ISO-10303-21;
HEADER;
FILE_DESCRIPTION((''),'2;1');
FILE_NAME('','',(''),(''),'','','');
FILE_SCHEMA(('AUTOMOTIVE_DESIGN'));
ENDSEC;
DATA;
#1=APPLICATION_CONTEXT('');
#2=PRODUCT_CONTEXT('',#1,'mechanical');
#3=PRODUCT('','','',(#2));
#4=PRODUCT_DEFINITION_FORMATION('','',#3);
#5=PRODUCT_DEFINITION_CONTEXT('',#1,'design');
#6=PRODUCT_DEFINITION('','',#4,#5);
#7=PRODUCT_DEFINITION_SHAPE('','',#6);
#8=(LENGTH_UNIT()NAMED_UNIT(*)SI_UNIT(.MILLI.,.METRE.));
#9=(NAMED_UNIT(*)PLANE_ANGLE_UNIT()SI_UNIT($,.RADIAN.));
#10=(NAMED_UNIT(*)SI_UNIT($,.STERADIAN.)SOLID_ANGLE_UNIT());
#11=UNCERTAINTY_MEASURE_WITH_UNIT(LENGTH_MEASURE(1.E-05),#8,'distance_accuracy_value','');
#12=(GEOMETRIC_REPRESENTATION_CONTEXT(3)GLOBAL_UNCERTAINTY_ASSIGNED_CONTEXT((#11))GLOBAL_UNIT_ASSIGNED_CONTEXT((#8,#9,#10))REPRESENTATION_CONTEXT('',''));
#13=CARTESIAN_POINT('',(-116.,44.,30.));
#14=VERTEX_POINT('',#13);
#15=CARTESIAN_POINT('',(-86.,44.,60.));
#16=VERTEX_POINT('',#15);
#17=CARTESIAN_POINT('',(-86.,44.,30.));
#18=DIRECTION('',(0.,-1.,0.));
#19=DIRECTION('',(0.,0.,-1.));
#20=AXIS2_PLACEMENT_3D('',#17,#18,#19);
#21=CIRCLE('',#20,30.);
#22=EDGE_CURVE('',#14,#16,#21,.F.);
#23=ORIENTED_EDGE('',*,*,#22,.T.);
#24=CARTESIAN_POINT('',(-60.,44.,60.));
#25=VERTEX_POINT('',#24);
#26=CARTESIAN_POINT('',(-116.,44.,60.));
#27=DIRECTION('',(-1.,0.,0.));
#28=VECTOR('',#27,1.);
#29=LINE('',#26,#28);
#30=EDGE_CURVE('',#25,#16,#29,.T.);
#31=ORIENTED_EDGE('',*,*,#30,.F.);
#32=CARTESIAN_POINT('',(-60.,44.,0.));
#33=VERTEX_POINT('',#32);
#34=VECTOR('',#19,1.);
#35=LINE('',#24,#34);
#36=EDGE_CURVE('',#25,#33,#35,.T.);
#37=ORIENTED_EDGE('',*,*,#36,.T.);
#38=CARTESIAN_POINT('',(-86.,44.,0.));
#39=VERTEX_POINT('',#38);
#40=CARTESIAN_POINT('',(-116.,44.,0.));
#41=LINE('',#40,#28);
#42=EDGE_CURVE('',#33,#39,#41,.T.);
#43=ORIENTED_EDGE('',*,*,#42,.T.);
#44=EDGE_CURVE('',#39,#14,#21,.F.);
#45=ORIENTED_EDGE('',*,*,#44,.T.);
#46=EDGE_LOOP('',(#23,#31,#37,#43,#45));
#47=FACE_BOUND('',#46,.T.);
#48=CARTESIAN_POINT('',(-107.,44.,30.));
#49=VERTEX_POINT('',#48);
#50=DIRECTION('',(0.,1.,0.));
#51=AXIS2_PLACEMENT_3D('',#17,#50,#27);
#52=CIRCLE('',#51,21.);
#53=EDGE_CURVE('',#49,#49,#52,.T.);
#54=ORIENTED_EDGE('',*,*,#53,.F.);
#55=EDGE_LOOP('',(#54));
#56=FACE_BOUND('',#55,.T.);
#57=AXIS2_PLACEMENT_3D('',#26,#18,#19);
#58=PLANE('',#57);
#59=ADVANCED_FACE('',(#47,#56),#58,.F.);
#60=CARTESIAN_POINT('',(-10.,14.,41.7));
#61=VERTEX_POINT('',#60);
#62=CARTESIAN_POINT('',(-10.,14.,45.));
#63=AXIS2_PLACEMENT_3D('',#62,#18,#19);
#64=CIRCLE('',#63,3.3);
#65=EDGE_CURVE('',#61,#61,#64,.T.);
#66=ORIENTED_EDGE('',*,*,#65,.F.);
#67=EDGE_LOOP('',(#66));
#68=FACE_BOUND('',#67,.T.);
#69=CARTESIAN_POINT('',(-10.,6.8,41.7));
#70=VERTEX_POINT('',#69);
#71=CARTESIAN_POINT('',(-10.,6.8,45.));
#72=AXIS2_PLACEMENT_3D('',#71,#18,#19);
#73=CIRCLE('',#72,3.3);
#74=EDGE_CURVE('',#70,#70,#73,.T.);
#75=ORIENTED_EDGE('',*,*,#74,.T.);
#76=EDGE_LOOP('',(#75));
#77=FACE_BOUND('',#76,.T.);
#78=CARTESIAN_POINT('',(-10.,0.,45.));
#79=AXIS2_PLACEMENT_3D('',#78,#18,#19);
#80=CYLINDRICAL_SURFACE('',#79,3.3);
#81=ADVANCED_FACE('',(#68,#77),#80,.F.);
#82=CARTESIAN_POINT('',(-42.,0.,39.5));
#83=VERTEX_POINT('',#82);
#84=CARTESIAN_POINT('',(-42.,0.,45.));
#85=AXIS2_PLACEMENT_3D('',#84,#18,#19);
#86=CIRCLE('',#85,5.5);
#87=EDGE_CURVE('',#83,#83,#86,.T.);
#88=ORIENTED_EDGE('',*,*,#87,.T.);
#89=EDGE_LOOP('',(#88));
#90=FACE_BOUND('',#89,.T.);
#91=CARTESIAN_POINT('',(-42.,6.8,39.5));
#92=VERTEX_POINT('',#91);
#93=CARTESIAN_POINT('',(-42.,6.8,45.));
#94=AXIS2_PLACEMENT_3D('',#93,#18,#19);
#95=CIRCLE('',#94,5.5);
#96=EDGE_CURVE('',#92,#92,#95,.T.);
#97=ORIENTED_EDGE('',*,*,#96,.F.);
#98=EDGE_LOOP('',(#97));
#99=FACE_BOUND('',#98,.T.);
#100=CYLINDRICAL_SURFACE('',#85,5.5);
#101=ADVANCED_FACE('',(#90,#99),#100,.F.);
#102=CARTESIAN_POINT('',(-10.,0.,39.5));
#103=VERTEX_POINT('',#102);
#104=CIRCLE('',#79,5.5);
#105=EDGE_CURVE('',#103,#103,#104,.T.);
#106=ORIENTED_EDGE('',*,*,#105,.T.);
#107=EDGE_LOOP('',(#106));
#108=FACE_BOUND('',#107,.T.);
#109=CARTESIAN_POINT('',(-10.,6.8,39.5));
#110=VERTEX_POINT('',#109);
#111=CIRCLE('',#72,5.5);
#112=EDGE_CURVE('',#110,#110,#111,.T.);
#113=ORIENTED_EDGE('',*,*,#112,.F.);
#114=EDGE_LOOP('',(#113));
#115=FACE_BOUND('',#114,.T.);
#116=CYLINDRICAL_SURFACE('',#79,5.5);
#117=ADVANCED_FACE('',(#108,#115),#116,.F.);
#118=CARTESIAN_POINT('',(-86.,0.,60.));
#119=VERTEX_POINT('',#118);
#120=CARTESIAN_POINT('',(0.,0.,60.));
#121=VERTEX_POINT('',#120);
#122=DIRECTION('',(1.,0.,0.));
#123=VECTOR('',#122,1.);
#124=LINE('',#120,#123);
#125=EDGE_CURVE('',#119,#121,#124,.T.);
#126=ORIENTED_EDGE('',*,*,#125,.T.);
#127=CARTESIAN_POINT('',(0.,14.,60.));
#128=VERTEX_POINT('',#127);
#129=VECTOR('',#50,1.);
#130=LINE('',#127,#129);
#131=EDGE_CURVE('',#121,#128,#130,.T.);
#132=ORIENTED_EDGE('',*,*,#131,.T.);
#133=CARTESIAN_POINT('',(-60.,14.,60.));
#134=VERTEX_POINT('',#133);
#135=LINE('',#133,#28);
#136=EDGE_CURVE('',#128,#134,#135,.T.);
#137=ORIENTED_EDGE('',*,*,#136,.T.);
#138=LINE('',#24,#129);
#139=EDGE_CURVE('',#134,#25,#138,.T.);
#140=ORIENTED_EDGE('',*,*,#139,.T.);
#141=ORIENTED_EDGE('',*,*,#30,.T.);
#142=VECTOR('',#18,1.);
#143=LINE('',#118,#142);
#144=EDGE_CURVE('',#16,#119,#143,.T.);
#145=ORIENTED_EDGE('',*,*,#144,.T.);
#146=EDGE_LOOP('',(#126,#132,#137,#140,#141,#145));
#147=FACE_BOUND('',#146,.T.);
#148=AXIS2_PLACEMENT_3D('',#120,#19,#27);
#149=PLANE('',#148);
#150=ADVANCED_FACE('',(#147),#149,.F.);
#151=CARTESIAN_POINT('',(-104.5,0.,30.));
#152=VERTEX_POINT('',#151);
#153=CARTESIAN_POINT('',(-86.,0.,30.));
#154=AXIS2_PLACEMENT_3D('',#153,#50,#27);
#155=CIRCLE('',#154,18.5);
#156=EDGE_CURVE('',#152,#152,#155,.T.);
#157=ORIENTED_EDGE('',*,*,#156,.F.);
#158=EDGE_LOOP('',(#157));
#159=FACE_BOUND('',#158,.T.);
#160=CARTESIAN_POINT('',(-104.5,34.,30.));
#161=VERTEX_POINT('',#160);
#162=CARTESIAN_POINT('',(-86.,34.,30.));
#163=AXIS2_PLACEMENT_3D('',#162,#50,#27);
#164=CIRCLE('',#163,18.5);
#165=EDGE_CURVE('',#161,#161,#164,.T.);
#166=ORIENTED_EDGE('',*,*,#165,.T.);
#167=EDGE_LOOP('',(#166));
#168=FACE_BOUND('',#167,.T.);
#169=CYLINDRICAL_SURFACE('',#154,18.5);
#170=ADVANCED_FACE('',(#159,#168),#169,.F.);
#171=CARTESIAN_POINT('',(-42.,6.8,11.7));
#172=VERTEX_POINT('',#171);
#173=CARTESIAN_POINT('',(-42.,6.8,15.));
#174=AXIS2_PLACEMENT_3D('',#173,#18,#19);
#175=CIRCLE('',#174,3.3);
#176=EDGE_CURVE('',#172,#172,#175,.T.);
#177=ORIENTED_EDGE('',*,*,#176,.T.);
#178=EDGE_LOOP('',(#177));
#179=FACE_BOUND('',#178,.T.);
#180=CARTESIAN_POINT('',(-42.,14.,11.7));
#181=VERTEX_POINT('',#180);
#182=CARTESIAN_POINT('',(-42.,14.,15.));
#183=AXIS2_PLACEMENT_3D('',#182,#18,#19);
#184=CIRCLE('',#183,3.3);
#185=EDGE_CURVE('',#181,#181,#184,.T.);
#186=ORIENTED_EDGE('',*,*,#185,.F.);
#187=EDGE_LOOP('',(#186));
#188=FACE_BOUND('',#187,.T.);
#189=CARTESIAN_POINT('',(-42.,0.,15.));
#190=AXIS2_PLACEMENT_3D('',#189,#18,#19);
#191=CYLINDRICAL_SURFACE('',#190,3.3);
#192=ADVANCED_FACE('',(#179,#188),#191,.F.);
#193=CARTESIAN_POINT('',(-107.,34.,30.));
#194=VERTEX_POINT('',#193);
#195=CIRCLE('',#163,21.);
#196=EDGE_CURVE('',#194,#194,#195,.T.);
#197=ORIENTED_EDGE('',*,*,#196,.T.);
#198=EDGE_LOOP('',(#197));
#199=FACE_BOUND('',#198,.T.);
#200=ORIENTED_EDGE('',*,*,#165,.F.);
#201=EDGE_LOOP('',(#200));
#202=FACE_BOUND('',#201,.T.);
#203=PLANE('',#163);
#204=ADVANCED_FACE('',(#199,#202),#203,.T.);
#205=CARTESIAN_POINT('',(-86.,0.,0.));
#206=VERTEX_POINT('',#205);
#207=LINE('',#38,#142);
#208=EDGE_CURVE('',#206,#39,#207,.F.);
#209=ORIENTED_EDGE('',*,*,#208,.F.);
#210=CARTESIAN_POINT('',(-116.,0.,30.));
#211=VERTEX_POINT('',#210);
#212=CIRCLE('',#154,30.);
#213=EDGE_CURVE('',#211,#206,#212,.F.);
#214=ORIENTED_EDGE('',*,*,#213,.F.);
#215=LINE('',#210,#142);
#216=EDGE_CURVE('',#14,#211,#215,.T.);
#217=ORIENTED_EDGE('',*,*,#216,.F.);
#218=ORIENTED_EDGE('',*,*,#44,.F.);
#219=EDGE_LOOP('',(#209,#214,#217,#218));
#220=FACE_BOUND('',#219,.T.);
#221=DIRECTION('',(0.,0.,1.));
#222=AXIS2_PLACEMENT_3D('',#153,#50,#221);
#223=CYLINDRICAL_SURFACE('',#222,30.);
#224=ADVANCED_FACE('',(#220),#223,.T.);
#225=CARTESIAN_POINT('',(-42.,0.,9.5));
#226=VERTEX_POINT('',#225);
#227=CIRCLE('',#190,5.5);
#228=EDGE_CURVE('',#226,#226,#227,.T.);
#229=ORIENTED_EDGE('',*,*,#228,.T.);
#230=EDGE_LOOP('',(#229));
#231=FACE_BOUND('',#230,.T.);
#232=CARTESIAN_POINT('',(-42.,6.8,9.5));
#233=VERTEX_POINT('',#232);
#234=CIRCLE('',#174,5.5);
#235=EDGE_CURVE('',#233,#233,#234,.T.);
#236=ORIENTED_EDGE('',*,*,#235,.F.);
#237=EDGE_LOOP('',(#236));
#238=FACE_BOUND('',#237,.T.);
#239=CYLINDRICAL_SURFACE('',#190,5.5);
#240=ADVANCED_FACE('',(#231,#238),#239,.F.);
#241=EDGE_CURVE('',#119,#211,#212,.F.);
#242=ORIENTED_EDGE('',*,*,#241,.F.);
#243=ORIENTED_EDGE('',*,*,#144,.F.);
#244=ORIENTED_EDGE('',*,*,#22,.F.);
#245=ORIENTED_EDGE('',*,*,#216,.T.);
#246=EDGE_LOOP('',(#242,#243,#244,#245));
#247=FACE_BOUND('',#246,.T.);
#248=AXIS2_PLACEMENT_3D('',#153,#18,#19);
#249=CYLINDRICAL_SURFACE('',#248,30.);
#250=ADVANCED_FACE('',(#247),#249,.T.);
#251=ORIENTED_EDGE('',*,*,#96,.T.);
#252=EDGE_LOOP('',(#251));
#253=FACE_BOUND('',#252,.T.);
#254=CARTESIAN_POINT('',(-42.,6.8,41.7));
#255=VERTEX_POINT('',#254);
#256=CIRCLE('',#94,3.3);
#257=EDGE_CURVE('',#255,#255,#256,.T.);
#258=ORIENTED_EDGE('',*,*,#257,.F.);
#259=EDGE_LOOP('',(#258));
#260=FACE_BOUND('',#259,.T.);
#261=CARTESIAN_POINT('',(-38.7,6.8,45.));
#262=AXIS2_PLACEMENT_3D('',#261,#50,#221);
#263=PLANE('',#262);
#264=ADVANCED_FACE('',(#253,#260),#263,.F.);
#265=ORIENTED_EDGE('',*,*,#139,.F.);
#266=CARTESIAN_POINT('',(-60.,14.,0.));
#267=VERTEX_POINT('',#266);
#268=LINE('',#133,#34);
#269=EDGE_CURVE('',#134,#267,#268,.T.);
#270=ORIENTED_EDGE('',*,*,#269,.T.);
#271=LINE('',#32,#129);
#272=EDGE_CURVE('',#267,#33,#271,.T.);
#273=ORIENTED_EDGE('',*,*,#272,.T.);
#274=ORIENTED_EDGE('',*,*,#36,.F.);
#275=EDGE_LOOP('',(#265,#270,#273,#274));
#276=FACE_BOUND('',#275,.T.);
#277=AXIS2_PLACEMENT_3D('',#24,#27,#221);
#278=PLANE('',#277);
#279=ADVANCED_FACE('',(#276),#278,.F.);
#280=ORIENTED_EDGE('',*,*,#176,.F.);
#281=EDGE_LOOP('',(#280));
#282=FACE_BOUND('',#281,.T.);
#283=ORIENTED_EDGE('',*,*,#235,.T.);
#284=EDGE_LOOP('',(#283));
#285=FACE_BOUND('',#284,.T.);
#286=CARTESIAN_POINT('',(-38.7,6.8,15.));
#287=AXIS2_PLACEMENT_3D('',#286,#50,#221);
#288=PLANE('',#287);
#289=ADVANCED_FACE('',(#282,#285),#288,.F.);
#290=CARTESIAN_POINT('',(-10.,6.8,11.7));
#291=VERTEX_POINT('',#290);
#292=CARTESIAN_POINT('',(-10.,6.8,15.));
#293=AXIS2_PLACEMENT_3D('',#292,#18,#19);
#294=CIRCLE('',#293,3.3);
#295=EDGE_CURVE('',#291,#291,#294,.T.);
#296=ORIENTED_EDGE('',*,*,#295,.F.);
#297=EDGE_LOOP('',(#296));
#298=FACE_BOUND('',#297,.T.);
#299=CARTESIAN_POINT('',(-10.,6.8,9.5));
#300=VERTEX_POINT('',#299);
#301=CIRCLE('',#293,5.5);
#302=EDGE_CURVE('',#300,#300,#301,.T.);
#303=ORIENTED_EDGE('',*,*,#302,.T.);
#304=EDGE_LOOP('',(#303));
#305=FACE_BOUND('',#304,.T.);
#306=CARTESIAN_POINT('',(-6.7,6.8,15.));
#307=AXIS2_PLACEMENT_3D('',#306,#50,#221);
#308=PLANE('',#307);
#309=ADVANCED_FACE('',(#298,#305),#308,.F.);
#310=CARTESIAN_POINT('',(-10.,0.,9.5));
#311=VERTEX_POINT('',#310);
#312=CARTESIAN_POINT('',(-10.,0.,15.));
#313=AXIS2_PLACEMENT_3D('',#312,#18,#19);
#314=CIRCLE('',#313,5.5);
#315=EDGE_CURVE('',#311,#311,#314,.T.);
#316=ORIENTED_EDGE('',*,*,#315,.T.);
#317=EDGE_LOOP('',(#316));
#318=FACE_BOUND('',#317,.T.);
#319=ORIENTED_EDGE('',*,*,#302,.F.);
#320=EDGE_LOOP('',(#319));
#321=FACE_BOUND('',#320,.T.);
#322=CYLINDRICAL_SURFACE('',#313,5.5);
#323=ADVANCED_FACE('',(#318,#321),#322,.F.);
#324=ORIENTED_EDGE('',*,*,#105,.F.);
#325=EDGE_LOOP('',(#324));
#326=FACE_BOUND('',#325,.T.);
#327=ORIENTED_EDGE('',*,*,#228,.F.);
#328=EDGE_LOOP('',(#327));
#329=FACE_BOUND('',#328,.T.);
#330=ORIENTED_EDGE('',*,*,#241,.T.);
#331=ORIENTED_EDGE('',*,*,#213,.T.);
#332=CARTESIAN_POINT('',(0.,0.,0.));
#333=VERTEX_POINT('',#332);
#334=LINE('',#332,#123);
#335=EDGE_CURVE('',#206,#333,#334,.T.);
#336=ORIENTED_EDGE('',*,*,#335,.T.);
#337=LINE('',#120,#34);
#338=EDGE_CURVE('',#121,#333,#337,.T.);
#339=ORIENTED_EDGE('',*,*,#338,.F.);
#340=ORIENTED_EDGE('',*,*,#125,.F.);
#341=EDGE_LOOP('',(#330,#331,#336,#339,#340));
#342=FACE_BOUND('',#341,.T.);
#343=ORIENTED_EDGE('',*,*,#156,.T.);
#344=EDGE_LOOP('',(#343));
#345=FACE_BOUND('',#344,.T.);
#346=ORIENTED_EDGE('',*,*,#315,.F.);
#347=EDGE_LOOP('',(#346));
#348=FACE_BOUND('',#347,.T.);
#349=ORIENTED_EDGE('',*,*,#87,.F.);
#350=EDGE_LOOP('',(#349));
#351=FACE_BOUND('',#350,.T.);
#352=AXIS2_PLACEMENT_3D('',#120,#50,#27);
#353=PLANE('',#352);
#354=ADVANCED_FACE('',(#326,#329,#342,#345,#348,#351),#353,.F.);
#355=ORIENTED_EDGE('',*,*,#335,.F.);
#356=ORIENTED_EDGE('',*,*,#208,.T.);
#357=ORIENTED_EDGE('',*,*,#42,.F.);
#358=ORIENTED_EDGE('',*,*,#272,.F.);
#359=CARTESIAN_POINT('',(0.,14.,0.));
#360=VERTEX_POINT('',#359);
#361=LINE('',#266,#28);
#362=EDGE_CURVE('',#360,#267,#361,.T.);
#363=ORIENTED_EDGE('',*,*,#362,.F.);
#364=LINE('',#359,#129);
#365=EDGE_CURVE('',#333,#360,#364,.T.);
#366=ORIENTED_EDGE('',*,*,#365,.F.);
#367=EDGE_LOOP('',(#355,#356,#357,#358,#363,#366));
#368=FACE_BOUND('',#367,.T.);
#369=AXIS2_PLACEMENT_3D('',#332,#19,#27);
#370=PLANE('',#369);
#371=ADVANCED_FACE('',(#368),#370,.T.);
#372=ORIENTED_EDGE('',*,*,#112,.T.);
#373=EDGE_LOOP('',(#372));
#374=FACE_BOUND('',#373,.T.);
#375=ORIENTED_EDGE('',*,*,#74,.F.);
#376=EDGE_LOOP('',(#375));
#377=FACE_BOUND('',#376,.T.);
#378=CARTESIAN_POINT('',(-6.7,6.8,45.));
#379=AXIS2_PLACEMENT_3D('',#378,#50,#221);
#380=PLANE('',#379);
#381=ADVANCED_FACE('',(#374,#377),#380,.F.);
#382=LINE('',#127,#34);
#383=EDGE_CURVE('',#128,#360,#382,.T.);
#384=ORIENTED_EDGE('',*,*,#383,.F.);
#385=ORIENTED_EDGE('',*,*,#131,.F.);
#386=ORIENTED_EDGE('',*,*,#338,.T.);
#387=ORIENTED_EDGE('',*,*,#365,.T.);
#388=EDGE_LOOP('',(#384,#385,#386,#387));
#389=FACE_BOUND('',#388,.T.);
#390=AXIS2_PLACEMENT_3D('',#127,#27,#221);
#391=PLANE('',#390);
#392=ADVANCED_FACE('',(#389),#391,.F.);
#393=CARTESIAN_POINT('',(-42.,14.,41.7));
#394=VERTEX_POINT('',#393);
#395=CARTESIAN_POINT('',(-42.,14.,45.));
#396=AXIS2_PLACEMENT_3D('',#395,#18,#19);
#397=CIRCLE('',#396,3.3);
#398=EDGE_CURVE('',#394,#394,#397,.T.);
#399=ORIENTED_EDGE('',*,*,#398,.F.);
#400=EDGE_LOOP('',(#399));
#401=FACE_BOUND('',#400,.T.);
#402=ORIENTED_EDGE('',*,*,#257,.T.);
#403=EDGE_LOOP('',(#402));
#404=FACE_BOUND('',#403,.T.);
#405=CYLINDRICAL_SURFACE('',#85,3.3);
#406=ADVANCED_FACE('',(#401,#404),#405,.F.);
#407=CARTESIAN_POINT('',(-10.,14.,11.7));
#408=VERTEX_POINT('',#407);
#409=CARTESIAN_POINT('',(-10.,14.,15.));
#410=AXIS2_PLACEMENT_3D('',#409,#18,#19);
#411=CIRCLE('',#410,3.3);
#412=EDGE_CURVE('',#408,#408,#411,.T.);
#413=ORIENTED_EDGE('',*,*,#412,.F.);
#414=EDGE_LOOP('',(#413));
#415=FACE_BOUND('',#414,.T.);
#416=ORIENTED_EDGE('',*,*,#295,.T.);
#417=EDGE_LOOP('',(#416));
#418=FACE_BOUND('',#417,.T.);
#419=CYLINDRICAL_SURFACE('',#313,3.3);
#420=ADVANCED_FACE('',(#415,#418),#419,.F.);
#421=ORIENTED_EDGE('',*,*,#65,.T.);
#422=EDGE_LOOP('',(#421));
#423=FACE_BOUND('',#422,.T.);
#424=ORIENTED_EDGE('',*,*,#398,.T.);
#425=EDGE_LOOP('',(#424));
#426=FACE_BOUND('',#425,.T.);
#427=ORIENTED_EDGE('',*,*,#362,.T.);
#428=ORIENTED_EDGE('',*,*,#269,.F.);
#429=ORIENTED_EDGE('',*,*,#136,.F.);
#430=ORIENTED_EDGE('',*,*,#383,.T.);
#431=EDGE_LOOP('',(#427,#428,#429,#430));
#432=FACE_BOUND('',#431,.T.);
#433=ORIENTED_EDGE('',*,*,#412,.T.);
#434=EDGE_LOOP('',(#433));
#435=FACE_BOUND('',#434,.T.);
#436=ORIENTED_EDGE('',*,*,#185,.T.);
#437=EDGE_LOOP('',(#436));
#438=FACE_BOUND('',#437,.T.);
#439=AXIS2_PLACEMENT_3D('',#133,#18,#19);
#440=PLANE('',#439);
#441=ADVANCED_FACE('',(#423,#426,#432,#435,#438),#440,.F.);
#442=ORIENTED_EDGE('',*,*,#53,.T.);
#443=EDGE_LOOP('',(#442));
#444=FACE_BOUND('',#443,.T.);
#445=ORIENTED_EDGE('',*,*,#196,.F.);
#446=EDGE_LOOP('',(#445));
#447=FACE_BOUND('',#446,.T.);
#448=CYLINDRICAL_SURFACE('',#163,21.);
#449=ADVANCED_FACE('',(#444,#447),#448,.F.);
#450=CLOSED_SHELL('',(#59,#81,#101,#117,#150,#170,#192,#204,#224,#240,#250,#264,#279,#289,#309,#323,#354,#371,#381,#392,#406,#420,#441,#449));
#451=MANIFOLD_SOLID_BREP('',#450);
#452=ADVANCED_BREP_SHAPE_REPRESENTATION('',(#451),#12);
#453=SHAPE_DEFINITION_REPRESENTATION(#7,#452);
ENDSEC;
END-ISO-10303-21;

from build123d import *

# Parameters (mm, degrees)
EXTRUDE_1_DEPTH              = 60
FILLET_1_R                   = 30
SKETCH_2_R                   = 21
CUT_EXTRUDE_1_DEPTH          = 10
CUT_EXTRUDE_2_DEPTH          = 135.951843263
CUT_EXTRUDE_2_DEPTH_BACK     = 135.951843263
SKETCH_3_R                   = 18.5
HOLE_WIZARD_M6_1_D           = 6.6
HOLE_WIZARD_M6_1_CBORE_D     = 11
HOLE_WIZARD_M6_1_CBORE_DEPTH = 6.8


with BuildPart() as part:
    # 草图1 → 凸台-拉伸1 (new body)
    with BuildSketch(Plane.XY):
        Polygon((0, 0), (-116, 0), (-116, 44), (-60, 44), (-60, 14), (0, 14), align=None)
    extrude(amount=EXTRUDE_1_DEPTH)

    # 圆角1
    fillet_1_edges = [part.edges().sort_by_distance(p)[0] for p in [
        (-116, 22, 60),
        (-116, 22, 0),
    ]]
    fillet(fillet_1_edges, radius=FILLET_1_R - 0.0001)  # a hair under: the kernel refuses the full size

    # 草图2 → 切除-拉伸1 (cut)
    with BuildSketch(Plane(origin=(0, 44, 0), x_dir=(1, 0, 0), z_dir=(0, 1, 0))):
        with Locations(Location((-86, -30, 0), (0, 0, 180))):
            Circle(SKETCH_2_R)
    extrude(amount=-CUT_EXTRUDE_1_DEPTH, mode=Mode.SUBTRACT)

    # 草图3 → 切除-拉伸2 (cut, two sides: drawn at the far end of the back side and taken through both)
    with BuildSketch(Plane(origin=(0, 34, 0), x_dir=(1, 0, 0), z_dir=(0, 1, 0)).offset(-CUT_EXTRUDE_2_DEPTH_BACK)):
        with Locations(Location((-86, -30, 0), (0, 0, 180))):
            Circle(SKETCH_3_R)
    extrude(amount=CUT_EXTRUDE_2_DEPTH + CUT_EXTRUDE_2_DEPTH_BACK, mode=Mode.SUBTRACT)

    # M6 六角圆柱头螺钉的柱形沉头孔1 (through all)
    with Locations(Plane.XZ):
        with Locations((-10, 45), (-42, 15), (-42, 45), (-10, 15)):
            CounterBoreHole(HOLE_WIZARD_M6_1_D / 2, HOLE_WIZARD_M6_1_CBORE_D / 2, HOLE_WIZARD_M6_1_CBORE_DEPTH)


solid = part.part
